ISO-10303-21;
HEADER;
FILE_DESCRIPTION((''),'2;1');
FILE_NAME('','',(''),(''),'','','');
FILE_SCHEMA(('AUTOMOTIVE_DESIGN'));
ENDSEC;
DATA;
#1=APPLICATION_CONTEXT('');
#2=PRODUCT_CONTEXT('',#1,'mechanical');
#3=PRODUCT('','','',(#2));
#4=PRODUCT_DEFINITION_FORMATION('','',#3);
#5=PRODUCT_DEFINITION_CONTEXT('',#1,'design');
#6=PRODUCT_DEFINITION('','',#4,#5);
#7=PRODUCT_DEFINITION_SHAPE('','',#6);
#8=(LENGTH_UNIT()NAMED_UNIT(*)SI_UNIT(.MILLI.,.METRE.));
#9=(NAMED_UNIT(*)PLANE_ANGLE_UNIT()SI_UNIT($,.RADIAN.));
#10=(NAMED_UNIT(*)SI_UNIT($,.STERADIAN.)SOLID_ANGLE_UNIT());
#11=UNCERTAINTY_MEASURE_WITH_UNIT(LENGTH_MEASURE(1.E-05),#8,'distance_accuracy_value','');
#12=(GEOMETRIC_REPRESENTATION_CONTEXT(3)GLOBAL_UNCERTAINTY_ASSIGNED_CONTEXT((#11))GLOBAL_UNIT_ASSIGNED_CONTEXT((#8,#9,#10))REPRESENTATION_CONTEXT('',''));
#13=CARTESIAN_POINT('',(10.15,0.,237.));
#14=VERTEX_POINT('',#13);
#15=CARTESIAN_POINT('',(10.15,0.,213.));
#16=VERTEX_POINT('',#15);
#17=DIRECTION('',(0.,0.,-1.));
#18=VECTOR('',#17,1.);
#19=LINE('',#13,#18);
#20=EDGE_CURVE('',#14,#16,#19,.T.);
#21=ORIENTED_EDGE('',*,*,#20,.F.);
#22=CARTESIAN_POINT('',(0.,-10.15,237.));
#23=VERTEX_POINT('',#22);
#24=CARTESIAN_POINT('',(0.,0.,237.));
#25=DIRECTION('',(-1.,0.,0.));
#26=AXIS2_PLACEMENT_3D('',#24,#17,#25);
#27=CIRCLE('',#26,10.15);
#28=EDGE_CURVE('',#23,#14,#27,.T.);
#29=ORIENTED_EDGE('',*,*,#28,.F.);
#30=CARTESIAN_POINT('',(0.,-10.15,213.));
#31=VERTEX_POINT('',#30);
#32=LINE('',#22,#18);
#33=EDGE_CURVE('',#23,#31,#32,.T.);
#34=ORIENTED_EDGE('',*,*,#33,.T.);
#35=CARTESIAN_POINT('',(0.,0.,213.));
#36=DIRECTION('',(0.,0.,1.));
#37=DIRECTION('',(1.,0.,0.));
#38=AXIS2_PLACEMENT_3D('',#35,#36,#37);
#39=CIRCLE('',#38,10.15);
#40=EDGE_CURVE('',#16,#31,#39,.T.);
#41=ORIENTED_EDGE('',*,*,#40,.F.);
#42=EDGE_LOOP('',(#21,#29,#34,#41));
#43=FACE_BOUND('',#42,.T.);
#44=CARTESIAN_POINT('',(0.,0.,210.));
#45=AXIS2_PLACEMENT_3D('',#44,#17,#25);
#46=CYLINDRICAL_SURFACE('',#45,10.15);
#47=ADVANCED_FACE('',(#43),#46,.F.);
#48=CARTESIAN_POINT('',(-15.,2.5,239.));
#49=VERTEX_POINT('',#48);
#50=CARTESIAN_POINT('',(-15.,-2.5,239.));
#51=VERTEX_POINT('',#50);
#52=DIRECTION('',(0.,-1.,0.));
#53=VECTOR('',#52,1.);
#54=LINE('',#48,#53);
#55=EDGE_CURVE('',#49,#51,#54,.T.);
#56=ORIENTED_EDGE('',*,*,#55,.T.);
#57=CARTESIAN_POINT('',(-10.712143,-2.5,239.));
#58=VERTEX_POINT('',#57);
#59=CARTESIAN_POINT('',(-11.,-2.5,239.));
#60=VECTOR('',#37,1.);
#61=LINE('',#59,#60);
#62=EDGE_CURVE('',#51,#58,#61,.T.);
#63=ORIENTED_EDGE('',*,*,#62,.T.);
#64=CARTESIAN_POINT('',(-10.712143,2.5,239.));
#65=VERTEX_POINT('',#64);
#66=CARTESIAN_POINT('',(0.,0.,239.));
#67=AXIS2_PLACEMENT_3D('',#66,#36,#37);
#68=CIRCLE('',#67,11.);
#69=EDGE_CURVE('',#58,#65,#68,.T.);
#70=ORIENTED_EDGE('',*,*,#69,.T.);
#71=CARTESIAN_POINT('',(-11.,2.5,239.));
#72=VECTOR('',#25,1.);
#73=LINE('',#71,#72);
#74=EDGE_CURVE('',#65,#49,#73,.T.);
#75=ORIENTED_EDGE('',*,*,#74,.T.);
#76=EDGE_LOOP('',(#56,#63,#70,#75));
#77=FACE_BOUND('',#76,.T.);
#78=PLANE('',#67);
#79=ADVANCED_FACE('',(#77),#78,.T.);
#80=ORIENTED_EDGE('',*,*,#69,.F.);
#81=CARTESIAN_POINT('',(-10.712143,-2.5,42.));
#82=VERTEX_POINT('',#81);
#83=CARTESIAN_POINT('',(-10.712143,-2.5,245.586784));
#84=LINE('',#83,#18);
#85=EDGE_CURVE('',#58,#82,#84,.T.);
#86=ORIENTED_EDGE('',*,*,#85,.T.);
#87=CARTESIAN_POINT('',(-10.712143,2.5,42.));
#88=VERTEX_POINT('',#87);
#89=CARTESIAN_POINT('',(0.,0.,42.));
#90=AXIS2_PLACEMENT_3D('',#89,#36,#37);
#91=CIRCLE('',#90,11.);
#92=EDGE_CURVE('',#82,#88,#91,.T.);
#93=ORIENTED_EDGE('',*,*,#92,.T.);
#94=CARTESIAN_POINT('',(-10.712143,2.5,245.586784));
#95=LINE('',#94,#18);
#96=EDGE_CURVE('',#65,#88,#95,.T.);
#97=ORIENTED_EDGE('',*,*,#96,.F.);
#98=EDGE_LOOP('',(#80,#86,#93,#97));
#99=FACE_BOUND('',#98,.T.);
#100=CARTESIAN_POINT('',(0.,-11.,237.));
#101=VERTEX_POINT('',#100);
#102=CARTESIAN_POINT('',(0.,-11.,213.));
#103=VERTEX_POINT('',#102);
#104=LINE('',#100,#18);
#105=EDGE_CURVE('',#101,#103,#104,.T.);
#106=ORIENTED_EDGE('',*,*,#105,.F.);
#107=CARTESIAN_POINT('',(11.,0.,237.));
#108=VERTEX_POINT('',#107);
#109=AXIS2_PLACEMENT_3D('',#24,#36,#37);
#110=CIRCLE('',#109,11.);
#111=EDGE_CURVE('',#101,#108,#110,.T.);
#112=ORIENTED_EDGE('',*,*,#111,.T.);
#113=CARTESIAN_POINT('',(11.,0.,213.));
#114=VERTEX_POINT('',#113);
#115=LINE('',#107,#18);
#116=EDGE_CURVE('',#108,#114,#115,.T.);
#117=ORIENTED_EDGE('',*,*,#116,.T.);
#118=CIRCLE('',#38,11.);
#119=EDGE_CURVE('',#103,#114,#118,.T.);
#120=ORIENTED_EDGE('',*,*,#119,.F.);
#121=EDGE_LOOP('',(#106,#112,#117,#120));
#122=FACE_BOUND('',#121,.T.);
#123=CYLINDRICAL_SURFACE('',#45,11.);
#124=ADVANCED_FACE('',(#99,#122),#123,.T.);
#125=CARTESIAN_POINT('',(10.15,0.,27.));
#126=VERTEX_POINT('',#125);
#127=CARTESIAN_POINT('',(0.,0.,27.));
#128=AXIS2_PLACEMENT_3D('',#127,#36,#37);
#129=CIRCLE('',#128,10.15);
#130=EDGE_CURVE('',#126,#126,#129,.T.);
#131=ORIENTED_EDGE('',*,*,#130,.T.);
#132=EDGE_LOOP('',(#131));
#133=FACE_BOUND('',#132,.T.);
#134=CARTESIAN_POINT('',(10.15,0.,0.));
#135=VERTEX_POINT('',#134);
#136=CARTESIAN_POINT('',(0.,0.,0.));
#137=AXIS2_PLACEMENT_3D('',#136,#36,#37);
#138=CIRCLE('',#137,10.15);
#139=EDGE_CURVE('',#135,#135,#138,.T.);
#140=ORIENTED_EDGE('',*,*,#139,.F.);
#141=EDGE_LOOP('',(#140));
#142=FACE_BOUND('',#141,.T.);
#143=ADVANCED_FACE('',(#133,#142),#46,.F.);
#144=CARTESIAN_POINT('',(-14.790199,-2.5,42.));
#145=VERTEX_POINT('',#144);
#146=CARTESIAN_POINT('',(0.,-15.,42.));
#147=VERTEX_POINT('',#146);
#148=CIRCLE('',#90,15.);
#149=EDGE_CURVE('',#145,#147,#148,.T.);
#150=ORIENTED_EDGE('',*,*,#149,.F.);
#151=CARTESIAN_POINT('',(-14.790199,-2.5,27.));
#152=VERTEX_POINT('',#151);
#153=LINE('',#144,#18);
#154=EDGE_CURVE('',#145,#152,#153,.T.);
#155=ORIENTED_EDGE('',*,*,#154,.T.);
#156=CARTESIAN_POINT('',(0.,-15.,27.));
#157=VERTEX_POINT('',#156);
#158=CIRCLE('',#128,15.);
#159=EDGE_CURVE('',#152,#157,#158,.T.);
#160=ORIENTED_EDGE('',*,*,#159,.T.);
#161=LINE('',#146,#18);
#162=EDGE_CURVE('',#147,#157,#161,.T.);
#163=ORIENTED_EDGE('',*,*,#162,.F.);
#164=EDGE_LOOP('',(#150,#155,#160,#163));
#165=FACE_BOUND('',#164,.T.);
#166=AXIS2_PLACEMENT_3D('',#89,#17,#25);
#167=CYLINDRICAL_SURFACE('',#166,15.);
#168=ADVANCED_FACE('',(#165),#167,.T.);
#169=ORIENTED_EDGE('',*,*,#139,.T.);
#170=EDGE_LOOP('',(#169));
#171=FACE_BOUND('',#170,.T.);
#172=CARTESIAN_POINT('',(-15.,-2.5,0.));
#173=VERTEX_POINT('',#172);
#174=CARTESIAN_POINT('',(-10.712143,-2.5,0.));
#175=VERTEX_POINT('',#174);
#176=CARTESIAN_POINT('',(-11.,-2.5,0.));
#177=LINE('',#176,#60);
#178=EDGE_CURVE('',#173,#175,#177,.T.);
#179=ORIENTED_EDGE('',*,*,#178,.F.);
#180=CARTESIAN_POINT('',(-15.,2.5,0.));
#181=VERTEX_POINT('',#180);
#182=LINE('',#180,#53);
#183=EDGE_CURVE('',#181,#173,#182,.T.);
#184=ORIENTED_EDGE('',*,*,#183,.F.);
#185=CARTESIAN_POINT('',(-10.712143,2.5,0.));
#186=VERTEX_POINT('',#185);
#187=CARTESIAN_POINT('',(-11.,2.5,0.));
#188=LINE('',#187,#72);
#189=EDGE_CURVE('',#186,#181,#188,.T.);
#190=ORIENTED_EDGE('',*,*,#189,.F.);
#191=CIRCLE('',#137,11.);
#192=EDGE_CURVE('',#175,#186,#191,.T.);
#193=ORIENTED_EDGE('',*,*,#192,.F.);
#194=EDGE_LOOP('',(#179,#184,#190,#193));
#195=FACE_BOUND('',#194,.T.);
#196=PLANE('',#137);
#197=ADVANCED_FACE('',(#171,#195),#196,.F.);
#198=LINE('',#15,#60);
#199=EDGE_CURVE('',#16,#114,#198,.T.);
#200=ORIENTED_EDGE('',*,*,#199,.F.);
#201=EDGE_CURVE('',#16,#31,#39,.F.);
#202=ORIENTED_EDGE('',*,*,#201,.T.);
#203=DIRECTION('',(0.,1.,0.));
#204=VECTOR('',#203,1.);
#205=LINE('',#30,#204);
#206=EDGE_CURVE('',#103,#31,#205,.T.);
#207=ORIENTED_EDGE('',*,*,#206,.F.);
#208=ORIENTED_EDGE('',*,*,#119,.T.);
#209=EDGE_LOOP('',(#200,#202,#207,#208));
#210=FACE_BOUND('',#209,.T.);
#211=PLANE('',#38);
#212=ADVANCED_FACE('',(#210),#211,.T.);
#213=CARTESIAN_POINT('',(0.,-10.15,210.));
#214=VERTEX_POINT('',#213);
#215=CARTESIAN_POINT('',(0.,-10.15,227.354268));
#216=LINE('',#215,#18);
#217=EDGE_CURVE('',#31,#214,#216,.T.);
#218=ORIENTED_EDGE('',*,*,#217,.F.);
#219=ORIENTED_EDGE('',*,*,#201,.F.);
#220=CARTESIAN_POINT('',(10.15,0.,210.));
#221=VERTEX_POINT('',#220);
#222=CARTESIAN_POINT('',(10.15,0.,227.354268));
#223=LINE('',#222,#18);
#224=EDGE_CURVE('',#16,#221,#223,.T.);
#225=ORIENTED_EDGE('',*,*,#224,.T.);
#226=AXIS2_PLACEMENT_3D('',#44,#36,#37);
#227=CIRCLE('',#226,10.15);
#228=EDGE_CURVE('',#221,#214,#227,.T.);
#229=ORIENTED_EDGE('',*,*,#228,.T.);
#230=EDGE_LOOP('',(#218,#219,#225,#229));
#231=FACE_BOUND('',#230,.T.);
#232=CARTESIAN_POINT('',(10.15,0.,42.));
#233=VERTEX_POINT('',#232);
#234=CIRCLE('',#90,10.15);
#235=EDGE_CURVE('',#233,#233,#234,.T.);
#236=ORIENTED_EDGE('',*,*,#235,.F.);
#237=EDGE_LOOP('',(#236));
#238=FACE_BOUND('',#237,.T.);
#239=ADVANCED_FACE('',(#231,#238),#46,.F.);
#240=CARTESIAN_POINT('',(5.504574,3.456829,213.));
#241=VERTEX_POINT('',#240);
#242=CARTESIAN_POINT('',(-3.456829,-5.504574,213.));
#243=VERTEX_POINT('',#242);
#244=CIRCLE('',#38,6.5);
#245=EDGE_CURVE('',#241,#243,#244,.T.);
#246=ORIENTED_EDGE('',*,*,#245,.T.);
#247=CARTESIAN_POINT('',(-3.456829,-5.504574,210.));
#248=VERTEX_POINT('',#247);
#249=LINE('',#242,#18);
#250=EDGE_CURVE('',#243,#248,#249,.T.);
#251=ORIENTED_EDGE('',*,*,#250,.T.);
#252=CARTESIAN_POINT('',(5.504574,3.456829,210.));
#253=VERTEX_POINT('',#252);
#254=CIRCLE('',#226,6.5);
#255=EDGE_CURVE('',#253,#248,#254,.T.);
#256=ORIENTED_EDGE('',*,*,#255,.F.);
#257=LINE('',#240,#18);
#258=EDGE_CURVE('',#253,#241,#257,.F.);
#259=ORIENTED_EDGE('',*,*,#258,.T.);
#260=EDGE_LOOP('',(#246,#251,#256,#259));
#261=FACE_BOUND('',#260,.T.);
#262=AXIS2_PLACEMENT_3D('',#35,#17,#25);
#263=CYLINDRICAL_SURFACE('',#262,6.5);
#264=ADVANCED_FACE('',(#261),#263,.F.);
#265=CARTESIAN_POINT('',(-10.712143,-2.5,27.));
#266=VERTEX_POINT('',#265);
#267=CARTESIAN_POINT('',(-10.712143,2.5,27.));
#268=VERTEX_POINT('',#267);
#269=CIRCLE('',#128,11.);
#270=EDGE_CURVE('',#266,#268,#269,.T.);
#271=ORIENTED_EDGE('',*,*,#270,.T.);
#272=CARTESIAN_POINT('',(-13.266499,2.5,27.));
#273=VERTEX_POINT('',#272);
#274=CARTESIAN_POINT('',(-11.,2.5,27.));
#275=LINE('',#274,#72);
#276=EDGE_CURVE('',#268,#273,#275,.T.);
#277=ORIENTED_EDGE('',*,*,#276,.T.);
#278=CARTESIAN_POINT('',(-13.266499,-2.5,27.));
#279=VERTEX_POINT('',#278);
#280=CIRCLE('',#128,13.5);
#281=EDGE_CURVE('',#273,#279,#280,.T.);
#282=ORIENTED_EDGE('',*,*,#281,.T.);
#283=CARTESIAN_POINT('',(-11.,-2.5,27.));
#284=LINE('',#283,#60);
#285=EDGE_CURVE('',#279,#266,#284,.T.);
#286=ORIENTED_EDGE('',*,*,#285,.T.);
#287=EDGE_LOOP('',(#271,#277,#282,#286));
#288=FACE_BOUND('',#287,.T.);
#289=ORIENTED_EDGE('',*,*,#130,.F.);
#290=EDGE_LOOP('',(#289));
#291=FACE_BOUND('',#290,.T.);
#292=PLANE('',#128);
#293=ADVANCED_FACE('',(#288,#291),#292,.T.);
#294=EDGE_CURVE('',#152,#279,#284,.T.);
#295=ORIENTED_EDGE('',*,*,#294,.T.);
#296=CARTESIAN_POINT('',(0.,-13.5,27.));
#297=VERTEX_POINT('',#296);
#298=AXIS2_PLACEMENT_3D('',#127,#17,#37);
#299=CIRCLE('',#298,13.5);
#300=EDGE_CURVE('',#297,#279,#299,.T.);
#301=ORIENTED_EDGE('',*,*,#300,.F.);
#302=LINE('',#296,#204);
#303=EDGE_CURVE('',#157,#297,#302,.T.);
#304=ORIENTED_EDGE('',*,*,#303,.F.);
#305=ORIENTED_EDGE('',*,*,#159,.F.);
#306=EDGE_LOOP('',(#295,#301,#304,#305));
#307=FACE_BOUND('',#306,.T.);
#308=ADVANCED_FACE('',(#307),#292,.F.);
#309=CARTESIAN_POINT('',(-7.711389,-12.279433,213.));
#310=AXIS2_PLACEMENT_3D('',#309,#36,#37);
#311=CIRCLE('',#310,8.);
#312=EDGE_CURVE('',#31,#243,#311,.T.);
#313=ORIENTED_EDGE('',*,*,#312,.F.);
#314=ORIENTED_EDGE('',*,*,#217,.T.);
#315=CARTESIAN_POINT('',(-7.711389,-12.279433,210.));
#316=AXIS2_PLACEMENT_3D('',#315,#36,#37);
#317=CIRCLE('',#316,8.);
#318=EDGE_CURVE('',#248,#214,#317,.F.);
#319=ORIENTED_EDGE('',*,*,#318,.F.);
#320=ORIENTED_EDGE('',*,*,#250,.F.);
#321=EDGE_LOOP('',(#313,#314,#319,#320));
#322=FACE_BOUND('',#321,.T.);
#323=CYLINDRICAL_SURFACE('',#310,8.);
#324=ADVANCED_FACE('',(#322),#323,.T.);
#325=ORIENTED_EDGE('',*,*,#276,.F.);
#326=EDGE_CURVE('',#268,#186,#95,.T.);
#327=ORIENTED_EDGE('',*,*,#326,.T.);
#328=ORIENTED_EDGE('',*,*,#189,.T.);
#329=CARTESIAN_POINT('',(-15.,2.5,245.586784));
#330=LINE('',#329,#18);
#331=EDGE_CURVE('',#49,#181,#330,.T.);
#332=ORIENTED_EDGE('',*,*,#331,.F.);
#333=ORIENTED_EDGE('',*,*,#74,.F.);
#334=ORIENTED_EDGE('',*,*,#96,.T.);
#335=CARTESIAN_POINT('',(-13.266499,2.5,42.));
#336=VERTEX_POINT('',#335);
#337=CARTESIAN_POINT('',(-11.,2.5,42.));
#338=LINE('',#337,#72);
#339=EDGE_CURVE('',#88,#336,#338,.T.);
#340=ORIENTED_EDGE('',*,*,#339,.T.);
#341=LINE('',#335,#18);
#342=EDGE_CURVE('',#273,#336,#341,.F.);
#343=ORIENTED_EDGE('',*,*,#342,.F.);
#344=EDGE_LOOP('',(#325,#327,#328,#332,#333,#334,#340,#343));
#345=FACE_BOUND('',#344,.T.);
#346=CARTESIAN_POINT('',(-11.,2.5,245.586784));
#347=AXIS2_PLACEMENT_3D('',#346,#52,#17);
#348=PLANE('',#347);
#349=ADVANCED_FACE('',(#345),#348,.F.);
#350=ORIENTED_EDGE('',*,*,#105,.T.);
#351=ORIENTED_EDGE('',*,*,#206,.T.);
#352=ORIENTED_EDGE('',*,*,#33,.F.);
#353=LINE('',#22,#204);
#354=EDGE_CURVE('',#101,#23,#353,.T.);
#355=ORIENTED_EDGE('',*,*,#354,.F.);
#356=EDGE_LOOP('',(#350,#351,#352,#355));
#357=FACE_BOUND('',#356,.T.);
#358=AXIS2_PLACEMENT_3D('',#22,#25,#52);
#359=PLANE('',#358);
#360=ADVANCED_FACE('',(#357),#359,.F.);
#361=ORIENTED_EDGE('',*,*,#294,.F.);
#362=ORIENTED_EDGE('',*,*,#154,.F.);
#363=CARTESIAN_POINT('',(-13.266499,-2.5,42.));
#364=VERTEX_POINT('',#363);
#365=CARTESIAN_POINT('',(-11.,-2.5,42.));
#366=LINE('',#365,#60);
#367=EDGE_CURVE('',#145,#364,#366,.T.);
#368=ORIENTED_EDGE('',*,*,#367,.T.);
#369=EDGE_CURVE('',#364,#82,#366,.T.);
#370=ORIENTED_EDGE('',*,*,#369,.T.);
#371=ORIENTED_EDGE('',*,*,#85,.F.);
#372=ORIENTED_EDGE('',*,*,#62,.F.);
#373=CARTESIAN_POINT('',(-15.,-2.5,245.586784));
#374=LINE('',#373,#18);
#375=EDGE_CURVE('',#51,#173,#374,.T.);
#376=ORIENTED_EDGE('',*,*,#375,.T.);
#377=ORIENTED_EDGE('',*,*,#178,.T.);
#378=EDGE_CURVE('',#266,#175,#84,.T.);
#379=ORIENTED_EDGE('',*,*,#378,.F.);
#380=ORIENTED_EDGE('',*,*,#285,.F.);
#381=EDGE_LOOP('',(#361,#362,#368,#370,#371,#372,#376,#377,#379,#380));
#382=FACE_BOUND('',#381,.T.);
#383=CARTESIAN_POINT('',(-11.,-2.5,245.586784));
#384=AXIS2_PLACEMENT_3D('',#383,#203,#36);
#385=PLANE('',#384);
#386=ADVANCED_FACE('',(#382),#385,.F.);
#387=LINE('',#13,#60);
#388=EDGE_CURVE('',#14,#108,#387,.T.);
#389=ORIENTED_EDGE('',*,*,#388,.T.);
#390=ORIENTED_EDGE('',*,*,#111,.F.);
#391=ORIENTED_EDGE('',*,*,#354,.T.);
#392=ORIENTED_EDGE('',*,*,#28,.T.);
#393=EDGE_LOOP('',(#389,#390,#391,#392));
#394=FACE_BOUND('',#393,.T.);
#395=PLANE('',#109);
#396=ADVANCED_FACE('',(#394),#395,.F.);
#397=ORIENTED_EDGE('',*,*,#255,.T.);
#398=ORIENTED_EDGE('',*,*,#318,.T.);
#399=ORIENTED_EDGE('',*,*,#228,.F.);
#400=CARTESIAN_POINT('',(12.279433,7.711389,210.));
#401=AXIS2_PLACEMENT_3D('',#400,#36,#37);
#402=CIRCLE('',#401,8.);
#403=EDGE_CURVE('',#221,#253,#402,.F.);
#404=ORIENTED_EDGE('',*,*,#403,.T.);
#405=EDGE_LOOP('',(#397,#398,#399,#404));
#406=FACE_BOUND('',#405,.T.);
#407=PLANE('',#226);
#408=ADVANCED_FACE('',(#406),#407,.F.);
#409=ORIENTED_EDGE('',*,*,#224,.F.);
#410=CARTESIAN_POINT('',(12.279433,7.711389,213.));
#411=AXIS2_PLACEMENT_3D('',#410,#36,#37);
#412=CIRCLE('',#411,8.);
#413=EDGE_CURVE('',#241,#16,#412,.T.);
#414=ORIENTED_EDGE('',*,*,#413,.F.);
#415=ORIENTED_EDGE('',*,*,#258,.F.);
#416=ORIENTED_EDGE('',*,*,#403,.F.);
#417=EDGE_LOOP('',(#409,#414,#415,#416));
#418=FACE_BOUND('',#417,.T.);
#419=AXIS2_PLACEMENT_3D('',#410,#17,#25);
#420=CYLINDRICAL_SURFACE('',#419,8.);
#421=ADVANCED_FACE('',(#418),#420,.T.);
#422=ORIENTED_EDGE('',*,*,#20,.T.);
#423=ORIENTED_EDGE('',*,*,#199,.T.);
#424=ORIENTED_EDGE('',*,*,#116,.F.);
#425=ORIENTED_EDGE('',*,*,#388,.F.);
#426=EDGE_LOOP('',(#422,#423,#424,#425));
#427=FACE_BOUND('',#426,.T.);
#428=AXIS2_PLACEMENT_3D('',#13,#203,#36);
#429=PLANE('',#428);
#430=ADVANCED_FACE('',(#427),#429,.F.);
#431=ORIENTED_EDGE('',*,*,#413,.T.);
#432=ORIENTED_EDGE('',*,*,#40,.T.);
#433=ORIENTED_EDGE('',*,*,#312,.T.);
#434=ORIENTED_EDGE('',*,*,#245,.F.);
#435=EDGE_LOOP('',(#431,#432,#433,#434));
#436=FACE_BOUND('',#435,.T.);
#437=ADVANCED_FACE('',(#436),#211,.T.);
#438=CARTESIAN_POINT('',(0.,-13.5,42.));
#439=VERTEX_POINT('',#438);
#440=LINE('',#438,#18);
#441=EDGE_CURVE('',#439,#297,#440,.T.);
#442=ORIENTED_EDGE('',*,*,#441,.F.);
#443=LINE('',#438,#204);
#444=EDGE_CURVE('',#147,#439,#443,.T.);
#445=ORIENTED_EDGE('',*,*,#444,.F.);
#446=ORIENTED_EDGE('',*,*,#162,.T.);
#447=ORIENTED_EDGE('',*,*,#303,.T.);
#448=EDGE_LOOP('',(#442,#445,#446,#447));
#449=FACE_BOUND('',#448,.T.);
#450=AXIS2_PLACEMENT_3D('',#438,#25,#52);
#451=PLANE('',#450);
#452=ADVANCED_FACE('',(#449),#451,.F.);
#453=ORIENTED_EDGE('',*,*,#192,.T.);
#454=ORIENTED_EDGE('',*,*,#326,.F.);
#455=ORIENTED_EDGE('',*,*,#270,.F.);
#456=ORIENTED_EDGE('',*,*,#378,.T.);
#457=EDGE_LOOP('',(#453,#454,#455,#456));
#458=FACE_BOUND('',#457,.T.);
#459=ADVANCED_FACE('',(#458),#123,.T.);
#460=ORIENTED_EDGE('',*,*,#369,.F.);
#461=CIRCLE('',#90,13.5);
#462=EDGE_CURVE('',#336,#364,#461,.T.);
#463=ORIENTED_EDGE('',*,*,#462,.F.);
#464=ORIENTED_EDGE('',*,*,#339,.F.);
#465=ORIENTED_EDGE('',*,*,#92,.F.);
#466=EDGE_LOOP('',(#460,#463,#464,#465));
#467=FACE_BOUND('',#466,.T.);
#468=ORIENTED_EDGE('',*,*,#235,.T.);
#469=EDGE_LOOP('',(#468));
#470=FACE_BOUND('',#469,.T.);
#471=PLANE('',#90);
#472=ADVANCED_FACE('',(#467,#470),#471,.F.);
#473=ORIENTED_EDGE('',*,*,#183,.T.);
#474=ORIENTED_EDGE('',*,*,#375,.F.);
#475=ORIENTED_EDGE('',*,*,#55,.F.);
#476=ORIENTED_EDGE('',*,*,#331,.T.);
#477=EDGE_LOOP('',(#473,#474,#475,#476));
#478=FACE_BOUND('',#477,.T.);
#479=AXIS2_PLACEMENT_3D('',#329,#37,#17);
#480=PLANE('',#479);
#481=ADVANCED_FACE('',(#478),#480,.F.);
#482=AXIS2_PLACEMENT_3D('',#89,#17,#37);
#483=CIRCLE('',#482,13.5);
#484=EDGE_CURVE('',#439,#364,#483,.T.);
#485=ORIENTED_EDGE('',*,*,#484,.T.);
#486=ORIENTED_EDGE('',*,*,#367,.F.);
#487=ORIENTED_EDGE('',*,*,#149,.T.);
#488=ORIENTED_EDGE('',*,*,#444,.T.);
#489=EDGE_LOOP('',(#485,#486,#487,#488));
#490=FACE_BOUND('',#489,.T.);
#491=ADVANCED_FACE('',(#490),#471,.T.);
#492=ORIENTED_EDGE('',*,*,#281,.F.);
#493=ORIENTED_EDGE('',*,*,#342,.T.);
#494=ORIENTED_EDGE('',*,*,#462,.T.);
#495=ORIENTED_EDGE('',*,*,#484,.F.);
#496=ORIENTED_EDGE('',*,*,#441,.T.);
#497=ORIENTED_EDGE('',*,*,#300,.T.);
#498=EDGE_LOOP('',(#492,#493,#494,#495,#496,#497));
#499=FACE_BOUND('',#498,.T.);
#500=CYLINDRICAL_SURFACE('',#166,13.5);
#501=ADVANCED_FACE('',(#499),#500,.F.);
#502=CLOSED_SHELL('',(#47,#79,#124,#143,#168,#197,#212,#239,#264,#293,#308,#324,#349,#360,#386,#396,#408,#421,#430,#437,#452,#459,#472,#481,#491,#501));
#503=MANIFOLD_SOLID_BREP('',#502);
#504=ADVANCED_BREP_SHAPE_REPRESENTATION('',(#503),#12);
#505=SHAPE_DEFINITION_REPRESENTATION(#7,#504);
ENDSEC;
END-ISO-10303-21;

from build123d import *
from build123d.topology import SkipClean

# Parameters (mm, degrees)
SCHIZZO1_R                  = 11
SCHIZZO1_R_2                = 10.15
TUBO_DEPTH                  = 210
INGRESSOCAVI_DEPTH          = 27
SCHIZZO4_R                  = 11
SCHIZZO4_R_2                = 6.5
FONDOCORSA_DEPTH            = 3
SCHIZZO5_R                  = 11
TAPPO_DEPTH                 = 2
BASEINFERIORE_DEPTH         = 239
SCHIZZO7_R                  = 13.5
TAGLIOANELLO_DEPTH          = 15
SUPPORTOANELLO_DEPTH        = 15
FACILITAZIONECAVI_DEPTH     = 3
RACCORDOFACILITAZIONECAVI_R = 8


with BuildPart() as part:
    # Schizzo1 → Tubo (new body)
    with BuildSketch(Plane.XY):
        Circle(SCHIZZO1_R)
        Circle(SCHIZZO1_R_2, mode=Mode.SUBTRACT)
    extrude(amount=TUBO_DEPTH)

    # Schizzo2 → IngressoCavi (add)
    with BuildSketch(Plane.XY.offset(210)):
        with BuildLine():
            Line((0, -10.15), (0, -11))
            ThreePointArc((0, -11), (-7.778174593, 7.778174593), (11, 0))
            Line((11, 0), (10.15, 0))
            ThreePointArc((10.15, 0), (-7.177133829, 7.177133829), (0, -10.15))
        make_face()
    extrude(amount=INGRESSOCAVI_DEPTH)

    # Schizzo4 → FondoCorsa (add)
    with SkipClean():  # the faces are left unmerged after this step: merging them gives an invalid solid
        with BuildSketch(Plane.XY.offset(210)):
            Circle(SCHIZZO4_R)
            Circle(SCHIZZO4_R_2, mode=Mode.SUBTRACT)
        extrude(amount=FONDOCORSA_DEPTH)

    # Schizzo5 → Tappo (add)
    with SkipClean():  # the faces are left unmerged after this step: merging them gives an invalid solid
        with BuildSketch(Plane.XY.offset(237)):
            Circle(SCHIZZO5_R)
        extrude(amount=TAPPO_DEPTH)
    add(part.part.scale(1), mode=Mode.REPLACE)  # the faces are merged on a copy

    # Schizzo6 → BaseInferiore (add)
    with SkipClean():  # the faces are left unmerged after this step: merging them gives an invalid solid
        with BuildSketch(Plane.XY):
            Polygon((-11, 2.5), (-15, 2.5), (-15, -2.5), (-11, -2.5), (-10.712142643, -2.5), (-10.712142643, 2.5), align=None)
        extrude(amount=BASEINFERIORE_DEPTH)

    # Schizzo7 → TaglioAnello (cut)
    with BuildSketch(Plane.XY.offset(27)):
        Circle(SCHIZZO7_R)
    extrude(amount=TAGLIOANELLO_DEPTH, mode=Mode.SUBTRACT)

    # Schizzo8 → SupportoAnello (add)
    with SkipClean():  # the faces are left unmerged after this step: merging them gives an invalid solid
        with BuildSketch(Plane.XY.offset(27)):
            with BuildLine():
                Line((-15, 0), (-13.5, 0))
                ThreePointArc((-13.5, 0), (-9.545941546, -9.545941546), (0, -13.5))
                Line((0, -13.5), (0, -15))
                ThreePointArc((0, -15), (-10.606601718, -10.606601718), (-15, 0))
            make_face()
        extrude(amount=SUPPORTOANELLO_DEPTH)

    # Schizzo9 → FacilitazioneCavi (cut)
    with SkipClean():  # the faces are left unmerged after this step: merging them gives an invalid solid
        with BuildSketch(Plane(origin=(0, 0, 210), x_dir=(-1, 0, 0), z_dir=(0, 0, -1))):
            with BuildLine():
                Line((-10.15, 0), (0, 0))
                Line((0, 0), (0, -10.15))
                ThreePointArc((0, -10.15), (-7.177133829, -7.177133829), (-10.15, 0))
            make_face()
        extrude(amount=-FACILITAZIONECAVI_DEPTH, mode=Mode.SUBTRACT)

    # RaccordoFacilitazioneCavi
    # the kernel refuses this fillet: 8 mm, written as the material it takes off along each edge
    with BuildSketch(Plane(origin=(0, -6.5, 222.125), x_dir=(0, -1, 0), z_dir=(0, 0, -1)), Plane(origin=(6.5, 0, 200.875), x_dir=(1, 0, 0), z_dir=(0, 0, 1))) as raccordofacilitazionecavi_piece_1:
        with BuildLine():
            CenterArc((5.779433498, 7.711388525), RACCORDOFACILITAZIONECAVI_R, 212.128500683, 42.43446725)
            Line((-0.995426363, 3.456829339), (-1.13092356, 3.371738155))
            ThreePointArc((-1.13092356, 3.371738155), (-0.407564337, 1.754373873), (-0.16, 0))
            Line((-0.16, 0), (0, -0.16))
            ThreePointArc((0, -0.16), (1.825, -0.16), (3.60741133, -0.15422777))
            Line((3.60741133, -0.15422777), (3.65, 0))
        make_face()
    extrude(amount=21.25, mode=Mode.SUBTRACT)


solid = part.part
